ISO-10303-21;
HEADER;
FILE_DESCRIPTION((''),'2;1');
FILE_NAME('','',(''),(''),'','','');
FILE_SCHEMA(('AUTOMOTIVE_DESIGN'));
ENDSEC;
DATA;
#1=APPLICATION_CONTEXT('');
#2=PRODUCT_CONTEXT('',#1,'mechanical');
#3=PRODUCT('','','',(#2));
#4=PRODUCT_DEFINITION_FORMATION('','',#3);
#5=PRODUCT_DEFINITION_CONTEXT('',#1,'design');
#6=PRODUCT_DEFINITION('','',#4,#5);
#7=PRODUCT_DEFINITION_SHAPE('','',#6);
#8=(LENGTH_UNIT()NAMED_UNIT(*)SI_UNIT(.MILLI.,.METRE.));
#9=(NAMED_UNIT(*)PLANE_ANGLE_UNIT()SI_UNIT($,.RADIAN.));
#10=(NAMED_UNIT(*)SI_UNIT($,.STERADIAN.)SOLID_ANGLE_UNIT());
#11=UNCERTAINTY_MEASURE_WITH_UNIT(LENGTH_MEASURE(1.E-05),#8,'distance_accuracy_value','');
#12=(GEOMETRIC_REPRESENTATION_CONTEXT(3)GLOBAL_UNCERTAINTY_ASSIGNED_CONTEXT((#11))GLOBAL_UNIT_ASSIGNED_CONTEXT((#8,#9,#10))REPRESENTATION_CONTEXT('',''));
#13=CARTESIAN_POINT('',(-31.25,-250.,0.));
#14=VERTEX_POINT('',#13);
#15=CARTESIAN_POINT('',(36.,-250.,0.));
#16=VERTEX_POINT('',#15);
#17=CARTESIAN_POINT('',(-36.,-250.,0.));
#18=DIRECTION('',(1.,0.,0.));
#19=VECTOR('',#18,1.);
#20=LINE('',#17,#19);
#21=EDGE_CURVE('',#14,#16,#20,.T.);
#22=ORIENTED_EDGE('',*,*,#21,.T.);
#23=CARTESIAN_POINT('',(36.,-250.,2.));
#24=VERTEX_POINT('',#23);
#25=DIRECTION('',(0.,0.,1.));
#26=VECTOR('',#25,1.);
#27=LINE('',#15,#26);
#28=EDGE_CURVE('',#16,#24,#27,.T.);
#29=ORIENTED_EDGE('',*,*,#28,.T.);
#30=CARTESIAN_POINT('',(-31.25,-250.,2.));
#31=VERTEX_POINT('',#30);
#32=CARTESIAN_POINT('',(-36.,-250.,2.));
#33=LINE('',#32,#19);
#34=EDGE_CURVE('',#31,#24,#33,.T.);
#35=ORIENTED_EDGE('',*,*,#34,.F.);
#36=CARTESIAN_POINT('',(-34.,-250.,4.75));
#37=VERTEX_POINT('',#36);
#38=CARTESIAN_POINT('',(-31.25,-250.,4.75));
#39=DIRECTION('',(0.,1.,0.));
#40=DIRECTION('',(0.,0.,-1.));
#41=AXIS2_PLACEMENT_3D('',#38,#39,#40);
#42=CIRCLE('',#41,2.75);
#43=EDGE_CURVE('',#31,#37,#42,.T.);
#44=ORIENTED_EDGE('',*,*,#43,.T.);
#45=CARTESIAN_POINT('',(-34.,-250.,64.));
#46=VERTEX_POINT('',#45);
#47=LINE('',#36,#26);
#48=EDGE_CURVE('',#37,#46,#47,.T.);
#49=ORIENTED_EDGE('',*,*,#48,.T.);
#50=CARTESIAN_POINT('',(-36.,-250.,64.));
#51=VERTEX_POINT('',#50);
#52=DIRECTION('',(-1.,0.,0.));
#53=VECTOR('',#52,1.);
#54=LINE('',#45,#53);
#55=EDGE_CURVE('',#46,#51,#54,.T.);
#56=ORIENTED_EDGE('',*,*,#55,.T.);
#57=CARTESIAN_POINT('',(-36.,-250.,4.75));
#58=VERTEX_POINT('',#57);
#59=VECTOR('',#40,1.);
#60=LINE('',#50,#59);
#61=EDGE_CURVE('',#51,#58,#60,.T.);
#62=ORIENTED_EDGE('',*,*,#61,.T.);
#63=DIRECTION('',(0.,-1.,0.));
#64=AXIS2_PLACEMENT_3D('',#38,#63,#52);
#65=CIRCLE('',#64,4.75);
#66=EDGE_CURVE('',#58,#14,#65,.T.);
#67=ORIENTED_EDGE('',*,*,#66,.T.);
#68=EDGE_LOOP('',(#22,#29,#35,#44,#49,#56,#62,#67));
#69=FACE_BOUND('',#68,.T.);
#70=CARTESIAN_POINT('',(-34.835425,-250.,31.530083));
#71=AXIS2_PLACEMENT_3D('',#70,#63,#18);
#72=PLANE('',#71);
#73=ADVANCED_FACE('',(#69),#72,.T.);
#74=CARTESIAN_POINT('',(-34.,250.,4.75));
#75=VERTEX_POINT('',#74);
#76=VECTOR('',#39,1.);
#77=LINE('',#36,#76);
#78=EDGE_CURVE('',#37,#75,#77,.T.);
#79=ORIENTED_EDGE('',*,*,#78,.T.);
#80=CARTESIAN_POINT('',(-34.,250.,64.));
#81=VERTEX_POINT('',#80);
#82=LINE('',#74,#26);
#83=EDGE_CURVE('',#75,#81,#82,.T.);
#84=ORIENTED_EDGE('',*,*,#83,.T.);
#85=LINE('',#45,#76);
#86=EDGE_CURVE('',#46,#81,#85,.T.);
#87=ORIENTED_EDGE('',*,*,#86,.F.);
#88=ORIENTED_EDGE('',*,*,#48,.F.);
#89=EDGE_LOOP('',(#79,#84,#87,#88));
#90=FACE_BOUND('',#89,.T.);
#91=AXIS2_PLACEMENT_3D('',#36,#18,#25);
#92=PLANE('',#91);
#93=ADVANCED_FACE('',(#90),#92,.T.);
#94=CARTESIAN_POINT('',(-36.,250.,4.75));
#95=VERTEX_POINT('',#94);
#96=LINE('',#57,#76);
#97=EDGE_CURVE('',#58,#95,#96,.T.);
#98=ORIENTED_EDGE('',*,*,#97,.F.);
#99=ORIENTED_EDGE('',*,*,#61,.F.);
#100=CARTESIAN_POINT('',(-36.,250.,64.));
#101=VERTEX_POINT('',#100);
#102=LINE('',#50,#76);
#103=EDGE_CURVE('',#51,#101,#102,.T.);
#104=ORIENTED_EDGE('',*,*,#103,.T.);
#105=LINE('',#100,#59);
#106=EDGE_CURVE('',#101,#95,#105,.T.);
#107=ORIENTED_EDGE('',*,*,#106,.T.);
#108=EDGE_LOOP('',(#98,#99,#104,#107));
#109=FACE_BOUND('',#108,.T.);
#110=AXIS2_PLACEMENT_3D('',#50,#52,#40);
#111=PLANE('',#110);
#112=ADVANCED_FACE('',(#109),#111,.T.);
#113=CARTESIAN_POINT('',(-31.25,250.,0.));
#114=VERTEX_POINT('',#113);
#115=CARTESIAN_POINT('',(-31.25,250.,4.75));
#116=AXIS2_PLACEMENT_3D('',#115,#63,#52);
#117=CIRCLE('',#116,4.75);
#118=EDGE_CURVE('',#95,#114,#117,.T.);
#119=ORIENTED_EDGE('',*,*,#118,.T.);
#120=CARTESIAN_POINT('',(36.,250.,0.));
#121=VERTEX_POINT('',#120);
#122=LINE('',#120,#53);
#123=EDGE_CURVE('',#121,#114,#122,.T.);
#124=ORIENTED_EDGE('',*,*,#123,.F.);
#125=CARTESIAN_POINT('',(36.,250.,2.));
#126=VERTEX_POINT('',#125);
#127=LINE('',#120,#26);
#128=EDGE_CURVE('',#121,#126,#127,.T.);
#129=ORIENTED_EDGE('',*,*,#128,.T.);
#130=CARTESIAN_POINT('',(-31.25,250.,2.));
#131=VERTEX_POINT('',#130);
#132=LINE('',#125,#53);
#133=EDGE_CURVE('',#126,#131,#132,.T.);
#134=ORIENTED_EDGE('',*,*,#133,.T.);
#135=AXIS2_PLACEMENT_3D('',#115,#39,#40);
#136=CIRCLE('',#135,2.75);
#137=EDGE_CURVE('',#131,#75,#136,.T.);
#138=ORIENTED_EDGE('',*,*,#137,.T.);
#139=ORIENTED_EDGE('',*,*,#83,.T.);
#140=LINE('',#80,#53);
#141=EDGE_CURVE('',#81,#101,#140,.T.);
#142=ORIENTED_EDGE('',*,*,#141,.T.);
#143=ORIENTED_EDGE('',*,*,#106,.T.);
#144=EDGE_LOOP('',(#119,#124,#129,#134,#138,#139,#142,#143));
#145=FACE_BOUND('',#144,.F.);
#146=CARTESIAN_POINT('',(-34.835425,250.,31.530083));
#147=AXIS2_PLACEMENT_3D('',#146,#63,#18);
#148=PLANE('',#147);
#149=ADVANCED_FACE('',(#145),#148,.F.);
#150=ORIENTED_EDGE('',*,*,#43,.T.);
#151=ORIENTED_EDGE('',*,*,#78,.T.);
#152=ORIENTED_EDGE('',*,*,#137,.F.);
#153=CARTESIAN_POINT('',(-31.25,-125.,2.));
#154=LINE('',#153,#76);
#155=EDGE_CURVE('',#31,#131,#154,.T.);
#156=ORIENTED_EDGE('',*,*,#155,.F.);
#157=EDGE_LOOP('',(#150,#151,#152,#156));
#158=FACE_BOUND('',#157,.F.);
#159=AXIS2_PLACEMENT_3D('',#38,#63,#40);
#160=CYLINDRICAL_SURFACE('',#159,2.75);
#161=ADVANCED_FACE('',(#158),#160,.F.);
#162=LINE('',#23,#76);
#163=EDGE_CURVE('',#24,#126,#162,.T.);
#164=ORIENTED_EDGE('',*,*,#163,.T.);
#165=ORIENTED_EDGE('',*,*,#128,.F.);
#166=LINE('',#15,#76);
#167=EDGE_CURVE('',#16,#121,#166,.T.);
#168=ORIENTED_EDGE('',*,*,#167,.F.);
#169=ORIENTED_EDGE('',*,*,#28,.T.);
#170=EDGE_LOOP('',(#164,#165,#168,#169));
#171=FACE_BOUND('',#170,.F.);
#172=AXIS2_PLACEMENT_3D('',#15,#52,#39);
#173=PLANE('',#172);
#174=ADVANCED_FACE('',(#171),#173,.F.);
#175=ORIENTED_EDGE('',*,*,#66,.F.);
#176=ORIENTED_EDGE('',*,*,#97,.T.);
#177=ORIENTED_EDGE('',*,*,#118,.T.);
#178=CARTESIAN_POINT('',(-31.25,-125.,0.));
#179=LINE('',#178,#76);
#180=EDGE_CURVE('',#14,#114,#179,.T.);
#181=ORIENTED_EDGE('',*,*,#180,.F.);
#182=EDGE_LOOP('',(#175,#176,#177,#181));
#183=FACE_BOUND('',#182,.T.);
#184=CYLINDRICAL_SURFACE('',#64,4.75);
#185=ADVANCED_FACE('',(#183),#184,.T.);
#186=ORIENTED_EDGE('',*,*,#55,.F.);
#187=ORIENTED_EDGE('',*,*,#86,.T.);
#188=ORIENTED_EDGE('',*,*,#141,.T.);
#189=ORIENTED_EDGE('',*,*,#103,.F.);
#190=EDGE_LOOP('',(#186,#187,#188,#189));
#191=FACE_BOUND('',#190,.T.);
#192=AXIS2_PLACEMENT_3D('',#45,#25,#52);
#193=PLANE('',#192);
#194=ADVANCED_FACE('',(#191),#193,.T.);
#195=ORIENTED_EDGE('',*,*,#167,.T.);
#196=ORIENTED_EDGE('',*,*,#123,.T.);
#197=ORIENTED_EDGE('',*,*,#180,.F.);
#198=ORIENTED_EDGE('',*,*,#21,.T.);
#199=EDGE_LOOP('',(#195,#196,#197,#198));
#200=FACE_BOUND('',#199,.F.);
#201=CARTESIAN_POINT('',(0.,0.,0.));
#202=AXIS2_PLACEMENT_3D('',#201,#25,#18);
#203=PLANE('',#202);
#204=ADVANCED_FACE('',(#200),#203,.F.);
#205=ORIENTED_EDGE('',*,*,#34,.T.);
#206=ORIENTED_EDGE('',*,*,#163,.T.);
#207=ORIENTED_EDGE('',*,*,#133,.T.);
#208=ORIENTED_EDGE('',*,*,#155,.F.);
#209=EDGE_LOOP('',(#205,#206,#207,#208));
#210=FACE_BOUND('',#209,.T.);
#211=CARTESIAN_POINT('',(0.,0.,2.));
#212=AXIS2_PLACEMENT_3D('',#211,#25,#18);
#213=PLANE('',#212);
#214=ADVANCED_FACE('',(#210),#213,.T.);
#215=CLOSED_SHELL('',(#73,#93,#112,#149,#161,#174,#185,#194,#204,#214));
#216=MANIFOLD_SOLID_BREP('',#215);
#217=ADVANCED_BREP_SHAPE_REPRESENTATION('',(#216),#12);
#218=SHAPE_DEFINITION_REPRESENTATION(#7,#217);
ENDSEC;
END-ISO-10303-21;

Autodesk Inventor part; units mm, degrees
ref_plane "YZ Plane" through (0, 0, 0) normal (1, 0, 0) x (0, 1, 0)
ref_plane "XZ Plane" through (0, 0, 0) normal (0, 1, 0) x (-1, 0, 0)
ref_plane "XY Plane" through (0, 0, 0) normal (0, 0, 1) x (1, 0, 0)
sketch "Sketch1" plane through (0, 0, 0) normal (0, 0, 1) x (1, 0, 0)
  line L0 (-36, -250) -> (36, -250)
  line L1 (36, -250) -> (36, 250)
  line L2 (36, 250) -> (-36, 250)
  line L3 (-36, 250) -> (-36, -250)
  line L4 (-36, -250) -> (36, 250) construction
  line L5 (36, -250) -> (-36, 250) construction
  point P0 (0, 0)
  dimension "d154" = 72
  dimension "d155" = 500
extrude "Plate5" add sketch "Sketch1" along normal blind 2
sketch "Sketch7" plane through (-34, -250, 0) normal (-1, 0, 0) x (0, -1, 0)
  line L0 (-500, 0) -> (0, 0)
  line L1 (0, 0) -> (0, 64)
  line L2 (0, 64) -> (-500, 64)
  line L3 (-500, 64) -> (-500, 0)
edge flange "Flange3" height 64 angle 90 thickness 2 bend radius 2.75 thickness toward (-1, 0, 0) relief round relief width 2 relief depth 1 edges at (-36, 0, 2) wall of the first edge with corners at (-34, 250, 0) (-34, -250, 0) (-34, -250, 64) (-34, 250, 64)
bend "Bend3"
corner "Corner3"
properties part number "PNS 753 FDS 1200 FLANGE 3" material "Stainless Steel"
